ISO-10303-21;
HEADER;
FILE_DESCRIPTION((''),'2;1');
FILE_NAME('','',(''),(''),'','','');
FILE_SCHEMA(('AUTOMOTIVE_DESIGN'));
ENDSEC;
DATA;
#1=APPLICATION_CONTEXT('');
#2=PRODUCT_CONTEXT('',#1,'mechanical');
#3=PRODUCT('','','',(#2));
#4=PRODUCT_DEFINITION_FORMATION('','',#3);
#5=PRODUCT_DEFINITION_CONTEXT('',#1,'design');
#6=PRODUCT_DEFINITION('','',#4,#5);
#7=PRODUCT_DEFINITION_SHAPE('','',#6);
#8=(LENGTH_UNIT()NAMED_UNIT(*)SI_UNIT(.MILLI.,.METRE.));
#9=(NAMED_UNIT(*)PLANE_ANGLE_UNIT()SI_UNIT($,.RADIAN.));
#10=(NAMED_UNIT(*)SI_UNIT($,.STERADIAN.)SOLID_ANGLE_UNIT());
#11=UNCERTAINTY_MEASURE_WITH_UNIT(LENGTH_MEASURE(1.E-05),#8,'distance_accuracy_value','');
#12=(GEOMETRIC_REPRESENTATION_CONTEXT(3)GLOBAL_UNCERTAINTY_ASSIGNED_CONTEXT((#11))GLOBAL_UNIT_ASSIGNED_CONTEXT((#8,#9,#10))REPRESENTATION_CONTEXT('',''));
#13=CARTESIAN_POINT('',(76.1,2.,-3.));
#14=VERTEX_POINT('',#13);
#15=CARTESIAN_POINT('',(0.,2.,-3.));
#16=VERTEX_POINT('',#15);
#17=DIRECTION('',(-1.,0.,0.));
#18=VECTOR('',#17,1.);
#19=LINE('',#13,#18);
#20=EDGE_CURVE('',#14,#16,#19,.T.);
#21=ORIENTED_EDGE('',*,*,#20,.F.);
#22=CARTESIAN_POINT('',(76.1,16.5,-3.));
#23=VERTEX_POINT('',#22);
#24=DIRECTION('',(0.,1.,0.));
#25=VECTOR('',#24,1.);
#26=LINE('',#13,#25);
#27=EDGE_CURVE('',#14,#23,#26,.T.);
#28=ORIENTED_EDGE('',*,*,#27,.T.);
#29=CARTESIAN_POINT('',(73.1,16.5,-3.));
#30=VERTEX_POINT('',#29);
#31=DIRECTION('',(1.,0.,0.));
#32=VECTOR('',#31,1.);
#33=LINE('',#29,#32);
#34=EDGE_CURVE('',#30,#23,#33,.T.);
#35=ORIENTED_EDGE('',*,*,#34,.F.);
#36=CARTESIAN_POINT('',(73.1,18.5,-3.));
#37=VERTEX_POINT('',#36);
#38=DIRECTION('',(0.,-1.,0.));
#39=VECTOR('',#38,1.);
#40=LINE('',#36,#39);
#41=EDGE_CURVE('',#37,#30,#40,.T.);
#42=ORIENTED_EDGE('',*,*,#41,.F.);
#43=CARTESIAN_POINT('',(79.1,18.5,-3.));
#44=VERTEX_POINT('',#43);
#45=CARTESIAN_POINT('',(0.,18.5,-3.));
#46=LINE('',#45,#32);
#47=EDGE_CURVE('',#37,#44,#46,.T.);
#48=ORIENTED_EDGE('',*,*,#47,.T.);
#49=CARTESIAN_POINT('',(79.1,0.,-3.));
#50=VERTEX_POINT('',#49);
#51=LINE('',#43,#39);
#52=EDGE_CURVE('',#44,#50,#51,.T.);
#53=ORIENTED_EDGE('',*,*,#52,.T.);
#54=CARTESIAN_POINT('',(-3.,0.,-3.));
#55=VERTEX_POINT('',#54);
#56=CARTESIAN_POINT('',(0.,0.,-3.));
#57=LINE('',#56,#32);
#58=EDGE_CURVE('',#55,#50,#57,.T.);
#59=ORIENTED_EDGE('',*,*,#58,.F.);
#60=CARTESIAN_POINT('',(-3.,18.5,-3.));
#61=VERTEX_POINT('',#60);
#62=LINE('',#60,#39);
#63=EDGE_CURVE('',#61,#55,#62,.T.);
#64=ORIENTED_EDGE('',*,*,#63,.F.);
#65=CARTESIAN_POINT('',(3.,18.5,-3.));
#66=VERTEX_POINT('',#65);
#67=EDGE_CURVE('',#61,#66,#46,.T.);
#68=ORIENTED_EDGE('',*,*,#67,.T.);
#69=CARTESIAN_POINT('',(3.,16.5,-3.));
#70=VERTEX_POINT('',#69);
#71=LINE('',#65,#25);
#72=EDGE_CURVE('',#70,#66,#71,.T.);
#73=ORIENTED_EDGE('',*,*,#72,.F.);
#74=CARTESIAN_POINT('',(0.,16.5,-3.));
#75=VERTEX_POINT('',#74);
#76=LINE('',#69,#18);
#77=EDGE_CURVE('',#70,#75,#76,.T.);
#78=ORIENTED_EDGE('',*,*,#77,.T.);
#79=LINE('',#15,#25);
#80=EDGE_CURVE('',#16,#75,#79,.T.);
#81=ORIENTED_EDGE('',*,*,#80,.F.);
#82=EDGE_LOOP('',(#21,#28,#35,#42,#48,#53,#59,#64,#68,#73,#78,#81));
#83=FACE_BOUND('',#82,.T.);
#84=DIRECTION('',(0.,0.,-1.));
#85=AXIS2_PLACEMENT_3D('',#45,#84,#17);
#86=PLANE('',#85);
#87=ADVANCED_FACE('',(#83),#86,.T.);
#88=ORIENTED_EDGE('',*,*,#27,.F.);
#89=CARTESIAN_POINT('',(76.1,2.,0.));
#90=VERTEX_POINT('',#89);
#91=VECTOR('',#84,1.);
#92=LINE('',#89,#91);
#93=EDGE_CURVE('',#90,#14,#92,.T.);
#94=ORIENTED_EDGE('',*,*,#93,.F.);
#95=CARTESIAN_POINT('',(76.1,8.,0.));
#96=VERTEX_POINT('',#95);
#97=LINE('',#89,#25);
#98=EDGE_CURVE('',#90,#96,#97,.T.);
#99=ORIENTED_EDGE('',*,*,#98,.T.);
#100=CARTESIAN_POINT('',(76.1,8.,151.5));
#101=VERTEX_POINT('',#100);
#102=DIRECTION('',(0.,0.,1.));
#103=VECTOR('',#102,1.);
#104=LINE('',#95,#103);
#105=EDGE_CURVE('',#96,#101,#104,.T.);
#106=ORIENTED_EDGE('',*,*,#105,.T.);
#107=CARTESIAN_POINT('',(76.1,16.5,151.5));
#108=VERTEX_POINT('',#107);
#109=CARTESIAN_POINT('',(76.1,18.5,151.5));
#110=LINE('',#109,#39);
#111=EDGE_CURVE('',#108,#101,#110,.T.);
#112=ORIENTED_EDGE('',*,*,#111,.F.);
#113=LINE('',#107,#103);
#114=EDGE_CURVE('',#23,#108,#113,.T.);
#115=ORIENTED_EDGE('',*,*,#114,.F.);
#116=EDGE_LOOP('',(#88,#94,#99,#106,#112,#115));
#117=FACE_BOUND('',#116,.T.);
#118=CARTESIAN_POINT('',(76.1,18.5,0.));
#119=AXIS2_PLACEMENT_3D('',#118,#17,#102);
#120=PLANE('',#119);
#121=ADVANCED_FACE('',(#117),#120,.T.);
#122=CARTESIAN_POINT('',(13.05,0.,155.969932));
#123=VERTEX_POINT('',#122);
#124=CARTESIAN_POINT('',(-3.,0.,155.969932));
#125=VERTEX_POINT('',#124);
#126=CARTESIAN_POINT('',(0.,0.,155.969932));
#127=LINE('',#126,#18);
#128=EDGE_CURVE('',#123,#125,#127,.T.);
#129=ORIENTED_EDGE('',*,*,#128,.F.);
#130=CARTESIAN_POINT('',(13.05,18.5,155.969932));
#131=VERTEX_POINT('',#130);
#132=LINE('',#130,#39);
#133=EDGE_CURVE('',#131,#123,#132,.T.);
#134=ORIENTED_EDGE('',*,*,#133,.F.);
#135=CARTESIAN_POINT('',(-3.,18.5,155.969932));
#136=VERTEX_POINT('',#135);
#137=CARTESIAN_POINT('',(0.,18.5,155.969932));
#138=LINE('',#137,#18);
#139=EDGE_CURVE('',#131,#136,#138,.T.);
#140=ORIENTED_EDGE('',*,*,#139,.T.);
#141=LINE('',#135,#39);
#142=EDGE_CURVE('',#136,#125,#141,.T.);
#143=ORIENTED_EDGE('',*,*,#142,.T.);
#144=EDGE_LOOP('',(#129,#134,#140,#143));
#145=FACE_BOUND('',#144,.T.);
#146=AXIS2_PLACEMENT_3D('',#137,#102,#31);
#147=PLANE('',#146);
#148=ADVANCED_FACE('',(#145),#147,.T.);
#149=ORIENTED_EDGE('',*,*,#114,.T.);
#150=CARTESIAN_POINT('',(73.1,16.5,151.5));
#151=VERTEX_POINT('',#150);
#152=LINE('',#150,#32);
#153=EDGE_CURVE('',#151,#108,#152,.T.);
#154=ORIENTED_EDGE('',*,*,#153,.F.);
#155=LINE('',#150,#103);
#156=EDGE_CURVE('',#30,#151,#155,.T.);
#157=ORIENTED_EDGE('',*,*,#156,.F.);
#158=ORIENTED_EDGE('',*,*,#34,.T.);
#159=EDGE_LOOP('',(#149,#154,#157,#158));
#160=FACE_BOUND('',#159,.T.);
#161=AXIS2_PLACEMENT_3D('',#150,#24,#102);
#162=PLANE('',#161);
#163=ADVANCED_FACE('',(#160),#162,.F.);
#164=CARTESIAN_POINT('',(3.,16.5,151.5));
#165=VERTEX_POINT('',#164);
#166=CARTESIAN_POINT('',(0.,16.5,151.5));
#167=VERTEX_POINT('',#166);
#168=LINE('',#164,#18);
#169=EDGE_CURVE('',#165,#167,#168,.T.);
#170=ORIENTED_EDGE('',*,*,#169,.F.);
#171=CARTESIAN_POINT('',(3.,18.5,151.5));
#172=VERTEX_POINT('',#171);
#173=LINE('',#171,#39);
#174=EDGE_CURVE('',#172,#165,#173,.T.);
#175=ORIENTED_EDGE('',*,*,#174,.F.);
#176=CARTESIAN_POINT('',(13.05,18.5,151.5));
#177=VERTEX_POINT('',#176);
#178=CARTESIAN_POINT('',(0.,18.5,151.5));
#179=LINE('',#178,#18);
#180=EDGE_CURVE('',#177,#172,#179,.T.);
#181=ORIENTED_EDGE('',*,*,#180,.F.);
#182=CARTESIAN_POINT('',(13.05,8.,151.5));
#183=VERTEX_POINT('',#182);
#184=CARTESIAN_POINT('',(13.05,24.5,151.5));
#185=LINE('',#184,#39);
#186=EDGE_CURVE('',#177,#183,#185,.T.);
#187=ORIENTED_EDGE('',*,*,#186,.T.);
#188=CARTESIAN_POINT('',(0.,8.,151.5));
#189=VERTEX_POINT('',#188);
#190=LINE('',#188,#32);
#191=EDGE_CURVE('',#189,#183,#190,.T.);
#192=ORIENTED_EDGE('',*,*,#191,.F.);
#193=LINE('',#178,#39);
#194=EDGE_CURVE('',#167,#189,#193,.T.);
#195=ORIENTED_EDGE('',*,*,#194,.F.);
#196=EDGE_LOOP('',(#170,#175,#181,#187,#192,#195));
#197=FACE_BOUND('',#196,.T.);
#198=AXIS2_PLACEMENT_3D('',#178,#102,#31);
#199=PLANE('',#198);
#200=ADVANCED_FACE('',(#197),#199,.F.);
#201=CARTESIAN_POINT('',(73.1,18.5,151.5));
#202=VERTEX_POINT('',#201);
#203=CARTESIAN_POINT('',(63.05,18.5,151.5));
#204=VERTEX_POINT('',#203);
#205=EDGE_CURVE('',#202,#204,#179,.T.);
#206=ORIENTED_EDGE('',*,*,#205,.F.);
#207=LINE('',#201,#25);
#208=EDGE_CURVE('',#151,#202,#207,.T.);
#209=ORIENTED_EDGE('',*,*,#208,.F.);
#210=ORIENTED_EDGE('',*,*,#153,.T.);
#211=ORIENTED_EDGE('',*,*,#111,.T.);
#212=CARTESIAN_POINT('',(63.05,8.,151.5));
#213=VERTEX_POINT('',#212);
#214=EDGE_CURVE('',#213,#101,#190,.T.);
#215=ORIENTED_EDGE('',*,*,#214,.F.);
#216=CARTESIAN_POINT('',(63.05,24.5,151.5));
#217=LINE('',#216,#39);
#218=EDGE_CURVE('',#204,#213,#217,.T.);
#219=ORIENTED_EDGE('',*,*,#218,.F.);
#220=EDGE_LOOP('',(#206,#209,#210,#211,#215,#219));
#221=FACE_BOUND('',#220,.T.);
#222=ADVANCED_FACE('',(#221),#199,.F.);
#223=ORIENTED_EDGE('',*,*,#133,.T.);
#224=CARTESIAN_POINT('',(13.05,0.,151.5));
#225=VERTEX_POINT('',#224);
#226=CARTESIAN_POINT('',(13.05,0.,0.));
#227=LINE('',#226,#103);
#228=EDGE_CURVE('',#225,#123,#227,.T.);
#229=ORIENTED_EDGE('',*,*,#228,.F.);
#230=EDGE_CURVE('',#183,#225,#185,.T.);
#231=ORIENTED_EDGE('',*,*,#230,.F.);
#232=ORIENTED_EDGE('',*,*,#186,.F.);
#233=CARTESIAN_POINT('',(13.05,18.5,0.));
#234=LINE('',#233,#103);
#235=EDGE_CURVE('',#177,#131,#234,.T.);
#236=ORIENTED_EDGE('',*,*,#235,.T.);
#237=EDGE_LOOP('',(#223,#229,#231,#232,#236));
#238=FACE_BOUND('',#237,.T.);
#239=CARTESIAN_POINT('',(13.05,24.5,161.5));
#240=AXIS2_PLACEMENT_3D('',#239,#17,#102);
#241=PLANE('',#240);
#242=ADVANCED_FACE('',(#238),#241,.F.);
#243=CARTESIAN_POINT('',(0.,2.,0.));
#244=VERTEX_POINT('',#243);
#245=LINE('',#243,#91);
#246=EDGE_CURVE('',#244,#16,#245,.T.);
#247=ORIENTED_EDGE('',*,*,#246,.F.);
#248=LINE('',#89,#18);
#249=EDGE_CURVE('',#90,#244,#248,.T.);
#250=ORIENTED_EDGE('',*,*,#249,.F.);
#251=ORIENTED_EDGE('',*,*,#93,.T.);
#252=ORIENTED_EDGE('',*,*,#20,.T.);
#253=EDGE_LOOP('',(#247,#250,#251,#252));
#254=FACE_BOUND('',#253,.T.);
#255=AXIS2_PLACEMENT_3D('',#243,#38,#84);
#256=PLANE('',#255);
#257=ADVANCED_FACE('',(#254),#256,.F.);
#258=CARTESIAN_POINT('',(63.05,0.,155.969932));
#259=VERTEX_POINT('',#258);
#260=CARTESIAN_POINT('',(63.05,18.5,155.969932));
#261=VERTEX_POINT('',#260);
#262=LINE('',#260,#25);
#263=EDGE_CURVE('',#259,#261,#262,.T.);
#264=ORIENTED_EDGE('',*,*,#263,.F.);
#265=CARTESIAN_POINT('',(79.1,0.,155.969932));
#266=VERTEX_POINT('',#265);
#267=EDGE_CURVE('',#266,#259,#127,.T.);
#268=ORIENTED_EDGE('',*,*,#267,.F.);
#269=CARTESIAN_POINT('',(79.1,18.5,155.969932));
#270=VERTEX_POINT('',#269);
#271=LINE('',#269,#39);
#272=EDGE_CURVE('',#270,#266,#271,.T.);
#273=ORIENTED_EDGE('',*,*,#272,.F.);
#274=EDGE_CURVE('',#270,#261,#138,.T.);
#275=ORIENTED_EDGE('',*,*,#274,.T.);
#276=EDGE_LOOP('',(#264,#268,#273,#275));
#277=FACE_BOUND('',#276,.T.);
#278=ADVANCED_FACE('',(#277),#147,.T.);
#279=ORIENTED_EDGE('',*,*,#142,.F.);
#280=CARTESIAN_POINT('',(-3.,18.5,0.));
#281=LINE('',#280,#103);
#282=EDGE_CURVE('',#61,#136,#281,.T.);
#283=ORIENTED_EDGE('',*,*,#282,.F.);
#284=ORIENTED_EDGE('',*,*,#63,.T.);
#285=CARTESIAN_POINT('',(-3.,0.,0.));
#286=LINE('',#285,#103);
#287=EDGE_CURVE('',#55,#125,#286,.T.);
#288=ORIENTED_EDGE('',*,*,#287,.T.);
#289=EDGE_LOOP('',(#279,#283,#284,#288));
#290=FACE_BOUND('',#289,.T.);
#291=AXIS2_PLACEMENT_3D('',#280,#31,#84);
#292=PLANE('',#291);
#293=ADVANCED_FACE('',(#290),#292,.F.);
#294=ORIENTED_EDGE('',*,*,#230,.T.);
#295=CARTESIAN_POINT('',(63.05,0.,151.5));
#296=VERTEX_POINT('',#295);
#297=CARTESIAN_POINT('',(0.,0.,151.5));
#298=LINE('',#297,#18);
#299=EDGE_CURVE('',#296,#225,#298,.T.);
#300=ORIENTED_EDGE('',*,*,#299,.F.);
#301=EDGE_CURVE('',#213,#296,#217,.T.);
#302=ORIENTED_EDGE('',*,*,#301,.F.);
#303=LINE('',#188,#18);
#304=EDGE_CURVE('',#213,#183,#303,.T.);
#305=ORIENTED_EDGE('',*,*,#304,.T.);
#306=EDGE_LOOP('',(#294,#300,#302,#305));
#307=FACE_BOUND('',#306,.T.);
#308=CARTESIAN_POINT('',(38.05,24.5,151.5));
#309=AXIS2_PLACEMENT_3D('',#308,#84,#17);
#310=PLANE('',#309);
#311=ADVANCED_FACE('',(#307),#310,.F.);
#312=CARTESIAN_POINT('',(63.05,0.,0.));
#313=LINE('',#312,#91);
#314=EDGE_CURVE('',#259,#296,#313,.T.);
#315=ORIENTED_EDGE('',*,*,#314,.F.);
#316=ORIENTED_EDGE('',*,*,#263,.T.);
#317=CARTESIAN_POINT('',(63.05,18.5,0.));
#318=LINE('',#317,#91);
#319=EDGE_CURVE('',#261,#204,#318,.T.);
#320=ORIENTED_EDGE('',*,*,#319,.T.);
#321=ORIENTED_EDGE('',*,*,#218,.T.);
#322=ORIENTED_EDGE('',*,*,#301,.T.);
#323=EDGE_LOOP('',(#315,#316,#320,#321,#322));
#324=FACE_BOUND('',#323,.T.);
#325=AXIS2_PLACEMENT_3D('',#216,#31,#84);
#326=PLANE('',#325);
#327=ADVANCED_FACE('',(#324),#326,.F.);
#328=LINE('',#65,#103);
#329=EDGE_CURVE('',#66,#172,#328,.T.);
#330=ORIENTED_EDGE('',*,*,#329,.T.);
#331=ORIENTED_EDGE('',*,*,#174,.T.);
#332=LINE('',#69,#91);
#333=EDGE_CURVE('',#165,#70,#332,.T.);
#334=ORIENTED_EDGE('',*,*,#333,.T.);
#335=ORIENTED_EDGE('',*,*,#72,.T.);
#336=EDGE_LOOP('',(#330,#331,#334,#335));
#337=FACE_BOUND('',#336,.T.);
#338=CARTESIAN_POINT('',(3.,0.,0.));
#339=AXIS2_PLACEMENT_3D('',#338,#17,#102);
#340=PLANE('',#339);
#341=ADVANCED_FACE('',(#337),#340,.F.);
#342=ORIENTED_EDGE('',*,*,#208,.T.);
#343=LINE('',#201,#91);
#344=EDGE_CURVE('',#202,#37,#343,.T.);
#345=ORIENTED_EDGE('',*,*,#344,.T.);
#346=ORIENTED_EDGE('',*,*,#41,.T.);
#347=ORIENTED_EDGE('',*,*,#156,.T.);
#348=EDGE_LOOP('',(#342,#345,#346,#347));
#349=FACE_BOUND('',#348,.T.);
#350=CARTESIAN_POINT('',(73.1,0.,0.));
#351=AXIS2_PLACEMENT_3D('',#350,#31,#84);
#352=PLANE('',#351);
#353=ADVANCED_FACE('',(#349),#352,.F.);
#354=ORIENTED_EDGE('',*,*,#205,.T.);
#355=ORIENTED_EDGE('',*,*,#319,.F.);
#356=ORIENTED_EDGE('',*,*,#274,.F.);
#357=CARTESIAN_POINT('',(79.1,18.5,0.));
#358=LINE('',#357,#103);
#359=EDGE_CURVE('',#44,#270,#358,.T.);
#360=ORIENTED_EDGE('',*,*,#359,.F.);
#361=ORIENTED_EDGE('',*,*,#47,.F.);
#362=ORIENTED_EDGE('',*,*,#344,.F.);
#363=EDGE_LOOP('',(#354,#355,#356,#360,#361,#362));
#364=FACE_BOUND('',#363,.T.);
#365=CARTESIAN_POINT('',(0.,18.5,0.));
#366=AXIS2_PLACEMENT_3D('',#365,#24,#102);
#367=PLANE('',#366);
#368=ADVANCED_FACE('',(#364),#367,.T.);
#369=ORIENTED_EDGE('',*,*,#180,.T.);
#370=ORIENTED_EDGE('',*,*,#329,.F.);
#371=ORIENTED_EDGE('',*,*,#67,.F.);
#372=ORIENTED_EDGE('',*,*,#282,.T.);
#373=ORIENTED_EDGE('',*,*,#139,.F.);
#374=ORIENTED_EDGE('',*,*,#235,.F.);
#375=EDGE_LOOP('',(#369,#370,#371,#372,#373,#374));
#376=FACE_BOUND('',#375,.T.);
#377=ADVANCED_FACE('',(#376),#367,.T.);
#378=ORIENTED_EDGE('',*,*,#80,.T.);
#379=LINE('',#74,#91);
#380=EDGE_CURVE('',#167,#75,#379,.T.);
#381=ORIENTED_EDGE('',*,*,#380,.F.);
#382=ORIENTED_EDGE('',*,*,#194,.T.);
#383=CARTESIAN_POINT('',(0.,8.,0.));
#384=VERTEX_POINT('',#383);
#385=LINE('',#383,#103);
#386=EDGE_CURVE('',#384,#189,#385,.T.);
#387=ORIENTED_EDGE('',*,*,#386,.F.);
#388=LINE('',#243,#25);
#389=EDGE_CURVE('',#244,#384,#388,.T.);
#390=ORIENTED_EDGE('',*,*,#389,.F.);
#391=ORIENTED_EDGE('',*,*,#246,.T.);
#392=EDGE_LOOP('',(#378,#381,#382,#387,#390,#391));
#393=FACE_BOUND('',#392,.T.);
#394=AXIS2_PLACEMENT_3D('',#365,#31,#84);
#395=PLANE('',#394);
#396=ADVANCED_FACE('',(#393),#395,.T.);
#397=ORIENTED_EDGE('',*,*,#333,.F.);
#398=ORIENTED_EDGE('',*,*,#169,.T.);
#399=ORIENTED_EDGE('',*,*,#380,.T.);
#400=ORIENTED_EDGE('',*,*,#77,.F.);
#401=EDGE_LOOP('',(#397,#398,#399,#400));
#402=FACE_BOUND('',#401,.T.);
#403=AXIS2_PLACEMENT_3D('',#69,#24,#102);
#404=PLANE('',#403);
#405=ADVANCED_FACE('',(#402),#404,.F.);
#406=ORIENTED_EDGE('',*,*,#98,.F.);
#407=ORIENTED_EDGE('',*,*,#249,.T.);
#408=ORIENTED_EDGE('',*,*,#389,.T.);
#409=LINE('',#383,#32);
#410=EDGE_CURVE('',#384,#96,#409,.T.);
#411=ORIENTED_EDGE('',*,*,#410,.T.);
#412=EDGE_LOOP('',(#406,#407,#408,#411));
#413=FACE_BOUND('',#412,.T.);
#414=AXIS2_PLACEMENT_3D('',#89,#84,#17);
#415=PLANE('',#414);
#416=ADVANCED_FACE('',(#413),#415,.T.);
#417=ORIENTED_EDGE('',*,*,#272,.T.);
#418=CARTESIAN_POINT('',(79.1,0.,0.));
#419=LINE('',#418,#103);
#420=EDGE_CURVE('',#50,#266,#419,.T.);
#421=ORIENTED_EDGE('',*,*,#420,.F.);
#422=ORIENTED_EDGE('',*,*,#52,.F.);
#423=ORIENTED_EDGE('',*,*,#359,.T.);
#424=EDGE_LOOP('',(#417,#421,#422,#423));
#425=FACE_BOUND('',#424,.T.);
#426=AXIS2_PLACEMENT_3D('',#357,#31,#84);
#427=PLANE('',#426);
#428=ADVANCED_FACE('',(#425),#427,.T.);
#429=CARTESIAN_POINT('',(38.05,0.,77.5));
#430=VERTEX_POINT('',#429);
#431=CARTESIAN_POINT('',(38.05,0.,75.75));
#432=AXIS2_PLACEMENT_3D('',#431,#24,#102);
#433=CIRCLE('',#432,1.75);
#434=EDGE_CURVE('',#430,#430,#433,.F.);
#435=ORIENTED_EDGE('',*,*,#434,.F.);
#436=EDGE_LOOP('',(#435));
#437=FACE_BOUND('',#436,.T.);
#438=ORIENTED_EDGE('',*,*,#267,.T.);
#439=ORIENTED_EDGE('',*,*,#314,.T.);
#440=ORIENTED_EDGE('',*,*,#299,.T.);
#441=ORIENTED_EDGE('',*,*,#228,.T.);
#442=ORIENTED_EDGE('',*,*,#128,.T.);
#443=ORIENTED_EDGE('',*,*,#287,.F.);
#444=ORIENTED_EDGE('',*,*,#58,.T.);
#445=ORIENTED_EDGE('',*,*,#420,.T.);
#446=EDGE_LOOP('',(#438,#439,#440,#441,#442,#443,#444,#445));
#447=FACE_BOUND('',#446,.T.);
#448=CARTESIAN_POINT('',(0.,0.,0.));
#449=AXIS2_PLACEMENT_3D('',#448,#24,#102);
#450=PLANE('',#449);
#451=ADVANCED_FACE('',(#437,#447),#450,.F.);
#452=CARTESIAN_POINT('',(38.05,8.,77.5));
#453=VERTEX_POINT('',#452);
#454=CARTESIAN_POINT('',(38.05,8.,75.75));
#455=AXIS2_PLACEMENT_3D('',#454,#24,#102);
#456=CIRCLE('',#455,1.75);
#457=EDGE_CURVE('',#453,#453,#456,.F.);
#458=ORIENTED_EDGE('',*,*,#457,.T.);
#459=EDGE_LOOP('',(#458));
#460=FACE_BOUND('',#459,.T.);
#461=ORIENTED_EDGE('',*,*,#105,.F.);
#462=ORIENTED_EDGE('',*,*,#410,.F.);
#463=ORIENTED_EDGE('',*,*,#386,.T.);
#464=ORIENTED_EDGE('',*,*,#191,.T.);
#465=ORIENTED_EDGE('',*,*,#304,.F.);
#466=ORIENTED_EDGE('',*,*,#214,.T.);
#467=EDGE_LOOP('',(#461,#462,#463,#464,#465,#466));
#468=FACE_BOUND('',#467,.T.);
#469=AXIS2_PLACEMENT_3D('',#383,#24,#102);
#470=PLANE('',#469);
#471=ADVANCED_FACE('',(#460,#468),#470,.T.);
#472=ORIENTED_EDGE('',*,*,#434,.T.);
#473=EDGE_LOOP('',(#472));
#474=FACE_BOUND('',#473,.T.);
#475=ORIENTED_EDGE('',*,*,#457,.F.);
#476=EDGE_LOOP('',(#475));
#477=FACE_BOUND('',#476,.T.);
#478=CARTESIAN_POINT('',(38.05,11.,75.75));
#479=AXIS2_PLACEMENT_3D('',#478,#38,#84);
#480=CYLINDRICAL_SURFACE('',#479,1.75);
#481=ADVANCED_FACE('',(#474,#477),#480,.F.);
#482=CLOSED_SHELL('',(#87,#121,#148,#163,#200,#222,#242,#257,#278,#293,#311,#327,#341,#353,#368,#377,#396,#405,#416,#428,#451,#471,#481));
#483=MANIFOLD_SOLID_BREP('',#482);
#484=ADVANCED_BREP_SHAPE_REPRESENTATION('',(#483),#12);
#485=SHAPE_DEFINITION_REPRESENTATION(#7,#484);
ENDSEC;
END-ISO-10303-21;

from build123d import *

# Parameters (mm, degrees)
SKETCH1_W                   = 76.1
SKETCH1_H                   = 151.5
BOSS_EXTRUDE2_DEPTH         = 8
SKETCH1_4_W                 = 76.1
SKETCH1_4_H                 = 3
BOSS_EXTRUDE3_DEPTH         = 18.5
CUT_EXTRUDE_THIN1_START     = -8
CUT_EXTRUDE_THIN1_OUTLINE_W = 50
CUT_EXTRUDE_THIN1_OUTLINE_H = 4.46993239
CUT_EXTRUDE_THIN1_DEPTH     = 18.5
SKETCH4_W                   = 76.1
SKETCH4_H                   = 3
CUT_EXTRUDE1_DEPTH          = 16.5
SKETCH6_W                   = 154.5
SKETCH6_H                   = 2
BOSS_EXTRUDE4_DEPTH         = 3
SKETCH7_W                   = 154.5
SKETCH7_H                   = 2
BOSS_EXTRUDE5_DEPTH         = 3
CUT_EXTRUDE2_DEPTH          = 3
CUT_EXTRUDE2_DEPTH_BACK     = 76.1
SKETCH8_R                   = 1.75


# Read off the part's stored shape, not the designer's step: Cut-Extrude-Thin1
with BuildPart() as part:
    # Sketch1 → Boss-Extrude2 (new body)
    with BuildSketch(Plane(origin=(0, 0, 0), x_dir=(1, 0, 0), z_dir=(0, 1, 0))):
        with Locations((38.05, -75.75)):
            Rectangle(SKETCH1_W, SKETCH1_H)
    extrude(amount=BOSS_EXTRUDE2_DEPTH)

    # Sketch1<4> → Boss-Extrude3 (add)
    with BuildSketch(Plane(origin=(0, 0, 0), x_dir=(1, 0, 0), z_dir=(0, 1, 0))):
        Polygon((0, -151.5), (-3, -151.5), (-3, -155.96993239), (79.1, -155.96993239), (79.1, -151.5), (76.1, -151.5), align=None)
        Polygon((0, 3), (-3, 3), (-3, -151.5), (0, -151.5), (0, 0), align=None)
        Polygon((79.1, 3), (79.1, -151.5), (76.1, -151.5), (76.1, 0), (76.1, 3), align=None)
        with Locations((38.05, 1.5)):
            Rectangle(SKETCH1_4_W, SKETCH1_4_H)
    extrude(amount=BOSS_EXTRUDE3_DEPTH)

    # Cut-Extrude-Thin1 outline → Cut-Extrude-Thin1 (cut)
    with BuildSketch(Plane(origin=(0, 8, 0), x_dir=(1, 0, 0), z_dir=(0, 1, 0)).offset(CUT_EXTRUDE_THIN1_START)):
        with Locations((38.05, -153.734966195)):
            Rectangle(CUT_EXTRUDE_THIN1_OUTLINE_W, CUT_EXTRUDE_THIN1_OUTLINE_H)
    extrude(amount=CUT_EXTRUDE_THIN1_DEPTH, mode=Mode.SUBTRACT)

    # Sketch4 → Cut-Extrude1 (cut)
    with BuildSketch(Plane(origin=(0, 18.5, 0), x_dir=(1, 0, 0), z_dir=(0, 1, 0))):
        with Locations((38.05, 1.5)):
            Rectangle(SKETCH4_W, SKETCH4_H)
    extrude(amount=-CUT_EXTRUDE1_DEPTH, mode=Mode.SUBTRACT)

    # Sketch6 → Boss-Extrude4 (add)
    with BuildSketch(Plane(origin=(0, 0, 0), x_dir=(0, 0, -1), z_dir=(1, 0, 0))):
        with Locations((-74.25, 17.5)):
            Rectangle(SKETCH6_W, SKETCH6_H)
    extrude(amount=BOSS_EXTRUDE4_DEPTH)

    # Sketch7 → Boss-Extrude5 (add)
    with BuildSketch(Plane.ZY.offset(-76.1)):
        with Locations((74.25, 17.5)):
            Rectangle(SKETCH7_W, SKETCH7_H)
    extrude(amount=BOSS_EXTRUDE5_DEPTH)

    # Sketch8 → Cut-Extrude2 (cut, two sides: drawn at the far end of the back side and taken through both)
    with BuildSketch(Plane(origin=(0, 8, 0), x_dir=(1, 0, 0), z_dir=(0, 1, 0)).offset(-CUT_EXTRUDE2_DEPTH_BACK)):
        with Locations(Location((38.05, -75.75, 0), (0, 0, 270))):
            Circle(SKETCH8_R)
    extrude(amount=CUT_EXTRUDE2_DEPTH + CUT_EXTRUDE2_DEPTH_BACK, mode=Mode.SUBTRACT)


solid = part.part
